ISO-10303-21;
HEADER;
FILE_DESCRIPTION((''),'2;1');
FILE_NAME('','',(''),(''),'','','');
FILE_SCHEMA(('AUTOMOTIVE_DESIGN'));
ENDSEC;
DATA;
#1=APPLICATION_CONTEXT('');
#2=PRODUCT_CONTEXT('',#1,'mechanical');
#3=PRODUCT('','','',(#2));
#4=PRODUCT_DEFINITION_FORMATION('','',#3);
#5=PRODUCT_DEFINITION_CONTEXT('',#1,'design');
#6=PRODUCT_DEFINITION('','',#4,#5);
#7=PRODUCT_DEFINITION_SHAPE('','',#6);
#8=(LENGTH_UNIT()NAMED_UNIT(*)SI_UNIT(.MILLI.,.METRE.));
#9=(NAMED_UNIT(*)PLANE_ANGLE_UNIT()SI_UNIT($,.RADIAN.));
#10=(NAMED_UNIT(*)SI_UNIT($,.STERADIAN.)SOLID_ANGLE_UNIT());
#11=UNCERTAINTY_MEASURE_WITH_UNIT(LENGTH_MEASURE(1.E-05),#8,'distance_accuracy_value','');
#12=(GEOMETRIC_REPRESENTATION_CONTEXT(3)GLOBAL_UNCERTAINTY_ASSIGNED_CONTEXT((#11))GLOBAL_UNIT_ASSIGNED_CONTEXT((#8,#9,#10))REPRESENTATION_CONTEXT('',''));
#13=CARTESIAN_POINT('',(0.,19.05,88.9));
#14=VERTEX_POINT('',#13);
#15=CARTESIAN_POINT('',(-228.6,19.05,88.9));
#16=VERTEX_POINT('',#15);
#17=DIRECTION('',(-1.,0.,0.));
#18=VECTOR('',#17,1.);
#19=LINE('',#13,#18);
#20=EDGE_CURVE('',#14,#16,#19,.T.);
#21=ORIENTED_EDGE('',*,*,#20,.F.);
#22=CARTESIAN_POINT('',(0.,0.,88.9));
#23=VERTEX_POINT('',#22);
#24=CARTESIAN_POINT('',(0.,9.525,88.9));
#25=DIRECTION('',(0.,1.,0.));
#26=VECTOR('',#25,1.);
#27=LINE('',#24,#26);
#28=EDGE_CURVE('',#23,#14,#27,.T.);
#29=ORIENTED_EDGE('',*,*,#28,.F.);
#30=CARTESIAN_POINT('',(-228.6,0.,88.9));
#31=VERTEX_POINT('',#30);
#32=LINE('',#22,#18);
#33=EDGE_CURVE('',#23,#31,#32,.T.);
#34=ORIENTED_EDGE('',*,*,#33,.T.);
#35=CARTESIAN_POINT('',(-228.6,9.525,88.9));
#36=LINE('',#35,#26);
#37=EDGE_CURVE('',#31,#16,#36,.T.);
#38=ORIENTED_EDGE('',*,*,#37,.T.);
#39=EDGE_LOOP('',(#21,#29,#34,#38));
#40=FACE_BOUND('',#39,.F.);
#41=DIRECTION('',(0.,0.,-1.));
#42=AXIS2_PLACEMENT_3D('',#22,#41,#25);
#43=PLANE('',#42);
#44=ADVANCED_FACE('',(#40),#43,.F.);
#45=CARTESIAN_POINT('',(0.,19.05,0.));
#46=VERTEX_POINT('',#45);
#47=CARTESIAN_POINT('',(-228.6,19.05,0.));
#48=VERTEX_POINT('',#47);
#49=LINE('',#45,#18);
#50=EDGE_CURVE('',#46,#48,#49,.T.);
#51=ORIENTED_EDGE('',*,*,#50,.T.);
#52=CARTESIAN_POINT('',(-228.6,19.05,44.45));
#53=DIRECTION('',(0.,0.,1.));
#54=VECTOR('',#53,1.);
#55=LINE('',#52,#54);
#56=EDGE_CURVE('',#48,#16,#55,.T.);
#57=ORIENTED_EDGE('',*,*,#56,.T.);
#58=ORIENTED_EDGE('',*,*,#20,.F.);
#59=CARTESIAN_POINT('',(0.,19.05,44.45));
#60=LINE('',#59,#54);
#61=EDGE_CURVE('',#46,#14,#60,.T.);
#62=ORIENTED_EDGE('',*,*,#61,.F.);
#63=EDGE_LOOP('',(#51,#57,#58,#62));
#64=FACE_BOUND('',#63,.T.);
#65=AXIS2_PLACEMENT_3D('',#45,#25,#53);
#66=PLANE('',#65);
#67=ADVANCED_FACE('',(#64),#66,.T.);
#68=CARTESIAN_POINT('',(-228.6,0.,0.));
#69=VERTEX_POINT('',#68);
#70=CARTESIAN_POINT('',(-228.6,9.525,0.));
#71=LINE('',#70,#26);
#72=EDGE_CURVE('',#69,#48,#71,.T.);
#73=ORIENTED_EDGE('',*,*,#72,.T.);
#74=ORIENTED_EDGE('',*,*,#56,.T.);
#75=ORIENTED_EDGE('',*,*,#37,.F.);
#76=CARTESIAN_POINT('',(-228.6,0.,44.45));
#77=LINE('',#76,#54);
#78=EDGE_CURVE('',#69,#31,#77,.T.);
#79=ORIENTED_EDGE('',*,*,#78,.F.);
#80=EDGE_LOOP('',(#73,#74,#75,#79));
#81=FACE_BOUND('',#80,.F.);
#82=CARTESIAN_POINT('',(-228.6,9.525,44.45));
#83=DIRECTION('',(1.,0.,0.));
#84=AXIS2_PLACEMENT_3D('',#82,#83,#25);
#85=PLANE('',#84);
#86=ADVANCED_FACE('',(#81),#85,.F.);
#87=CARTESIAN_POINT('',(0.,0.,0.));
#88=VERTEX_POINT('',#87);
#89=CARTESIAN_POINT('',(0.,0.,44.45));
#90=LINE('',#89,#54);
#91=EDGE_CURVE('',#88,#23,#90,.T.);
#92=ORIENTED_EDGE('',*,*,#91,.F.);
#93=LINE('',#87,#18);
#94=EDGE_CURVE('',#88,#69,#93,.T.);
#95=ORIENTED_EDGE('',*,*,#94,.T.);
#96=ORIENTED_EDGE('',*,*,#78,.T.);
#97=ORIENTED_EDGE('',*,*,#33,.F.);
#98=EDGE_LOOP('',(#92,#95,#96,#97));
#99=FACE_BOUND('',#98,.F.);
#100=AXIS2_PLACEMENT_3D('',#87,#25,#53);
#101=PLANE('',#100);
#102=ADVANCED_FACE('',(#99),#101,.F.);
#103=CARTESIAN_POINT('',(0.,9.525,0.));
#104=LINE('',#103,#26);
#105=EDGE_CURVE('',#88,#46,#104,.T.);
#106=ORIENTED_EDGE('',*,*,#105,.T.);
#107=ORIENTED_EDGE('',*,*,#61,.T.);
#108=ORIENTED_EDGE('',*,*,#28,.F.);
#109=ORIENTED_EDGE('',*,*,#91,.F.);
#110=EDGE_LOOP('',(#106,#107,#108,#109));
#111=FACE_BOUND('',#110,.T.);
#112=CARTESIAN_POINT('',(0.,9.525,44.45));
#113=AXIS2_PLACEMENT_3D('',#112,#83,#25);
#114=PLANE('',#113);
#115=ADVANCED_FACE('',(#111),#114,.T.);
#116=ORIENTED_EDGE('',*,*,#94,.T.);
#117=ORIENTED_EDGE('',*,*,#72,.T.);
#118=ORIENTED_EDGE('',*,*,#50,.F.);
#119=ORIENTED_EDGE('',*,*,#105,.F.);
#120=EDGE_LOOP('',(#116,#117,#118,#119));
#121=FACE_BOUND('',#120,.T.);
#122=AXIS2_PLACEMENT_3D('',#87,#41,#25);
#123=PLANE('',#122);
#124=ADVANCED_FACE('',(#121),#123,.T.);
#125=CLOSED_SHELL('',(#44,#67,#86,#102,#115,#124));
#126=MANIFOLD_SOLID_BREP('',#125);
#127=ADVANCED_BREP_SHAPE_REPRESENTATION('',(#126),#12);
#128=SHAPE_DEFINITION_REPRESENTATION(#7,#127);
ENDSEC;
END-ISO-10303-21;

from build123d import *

# Parameters (mm, degrees)
F1_W     = 19.05
F1_H     = 88.9
F2_DEPTH = 228.6


# Not quite as in the source:
# - a variable given as a bare number and used for a length is read in inches; the dataset says mm whatever the document's units were


with BuildPart() as f2:
    # F1 (on Right) → F2 (new body)
    with BuildSketch(Plane.YZ):
        with Locations((9.525, 44.45)):
            Rectangle(F1_W, F1_H)
    extrude(amount=-F2_DEPTH)


solid = f2.part
